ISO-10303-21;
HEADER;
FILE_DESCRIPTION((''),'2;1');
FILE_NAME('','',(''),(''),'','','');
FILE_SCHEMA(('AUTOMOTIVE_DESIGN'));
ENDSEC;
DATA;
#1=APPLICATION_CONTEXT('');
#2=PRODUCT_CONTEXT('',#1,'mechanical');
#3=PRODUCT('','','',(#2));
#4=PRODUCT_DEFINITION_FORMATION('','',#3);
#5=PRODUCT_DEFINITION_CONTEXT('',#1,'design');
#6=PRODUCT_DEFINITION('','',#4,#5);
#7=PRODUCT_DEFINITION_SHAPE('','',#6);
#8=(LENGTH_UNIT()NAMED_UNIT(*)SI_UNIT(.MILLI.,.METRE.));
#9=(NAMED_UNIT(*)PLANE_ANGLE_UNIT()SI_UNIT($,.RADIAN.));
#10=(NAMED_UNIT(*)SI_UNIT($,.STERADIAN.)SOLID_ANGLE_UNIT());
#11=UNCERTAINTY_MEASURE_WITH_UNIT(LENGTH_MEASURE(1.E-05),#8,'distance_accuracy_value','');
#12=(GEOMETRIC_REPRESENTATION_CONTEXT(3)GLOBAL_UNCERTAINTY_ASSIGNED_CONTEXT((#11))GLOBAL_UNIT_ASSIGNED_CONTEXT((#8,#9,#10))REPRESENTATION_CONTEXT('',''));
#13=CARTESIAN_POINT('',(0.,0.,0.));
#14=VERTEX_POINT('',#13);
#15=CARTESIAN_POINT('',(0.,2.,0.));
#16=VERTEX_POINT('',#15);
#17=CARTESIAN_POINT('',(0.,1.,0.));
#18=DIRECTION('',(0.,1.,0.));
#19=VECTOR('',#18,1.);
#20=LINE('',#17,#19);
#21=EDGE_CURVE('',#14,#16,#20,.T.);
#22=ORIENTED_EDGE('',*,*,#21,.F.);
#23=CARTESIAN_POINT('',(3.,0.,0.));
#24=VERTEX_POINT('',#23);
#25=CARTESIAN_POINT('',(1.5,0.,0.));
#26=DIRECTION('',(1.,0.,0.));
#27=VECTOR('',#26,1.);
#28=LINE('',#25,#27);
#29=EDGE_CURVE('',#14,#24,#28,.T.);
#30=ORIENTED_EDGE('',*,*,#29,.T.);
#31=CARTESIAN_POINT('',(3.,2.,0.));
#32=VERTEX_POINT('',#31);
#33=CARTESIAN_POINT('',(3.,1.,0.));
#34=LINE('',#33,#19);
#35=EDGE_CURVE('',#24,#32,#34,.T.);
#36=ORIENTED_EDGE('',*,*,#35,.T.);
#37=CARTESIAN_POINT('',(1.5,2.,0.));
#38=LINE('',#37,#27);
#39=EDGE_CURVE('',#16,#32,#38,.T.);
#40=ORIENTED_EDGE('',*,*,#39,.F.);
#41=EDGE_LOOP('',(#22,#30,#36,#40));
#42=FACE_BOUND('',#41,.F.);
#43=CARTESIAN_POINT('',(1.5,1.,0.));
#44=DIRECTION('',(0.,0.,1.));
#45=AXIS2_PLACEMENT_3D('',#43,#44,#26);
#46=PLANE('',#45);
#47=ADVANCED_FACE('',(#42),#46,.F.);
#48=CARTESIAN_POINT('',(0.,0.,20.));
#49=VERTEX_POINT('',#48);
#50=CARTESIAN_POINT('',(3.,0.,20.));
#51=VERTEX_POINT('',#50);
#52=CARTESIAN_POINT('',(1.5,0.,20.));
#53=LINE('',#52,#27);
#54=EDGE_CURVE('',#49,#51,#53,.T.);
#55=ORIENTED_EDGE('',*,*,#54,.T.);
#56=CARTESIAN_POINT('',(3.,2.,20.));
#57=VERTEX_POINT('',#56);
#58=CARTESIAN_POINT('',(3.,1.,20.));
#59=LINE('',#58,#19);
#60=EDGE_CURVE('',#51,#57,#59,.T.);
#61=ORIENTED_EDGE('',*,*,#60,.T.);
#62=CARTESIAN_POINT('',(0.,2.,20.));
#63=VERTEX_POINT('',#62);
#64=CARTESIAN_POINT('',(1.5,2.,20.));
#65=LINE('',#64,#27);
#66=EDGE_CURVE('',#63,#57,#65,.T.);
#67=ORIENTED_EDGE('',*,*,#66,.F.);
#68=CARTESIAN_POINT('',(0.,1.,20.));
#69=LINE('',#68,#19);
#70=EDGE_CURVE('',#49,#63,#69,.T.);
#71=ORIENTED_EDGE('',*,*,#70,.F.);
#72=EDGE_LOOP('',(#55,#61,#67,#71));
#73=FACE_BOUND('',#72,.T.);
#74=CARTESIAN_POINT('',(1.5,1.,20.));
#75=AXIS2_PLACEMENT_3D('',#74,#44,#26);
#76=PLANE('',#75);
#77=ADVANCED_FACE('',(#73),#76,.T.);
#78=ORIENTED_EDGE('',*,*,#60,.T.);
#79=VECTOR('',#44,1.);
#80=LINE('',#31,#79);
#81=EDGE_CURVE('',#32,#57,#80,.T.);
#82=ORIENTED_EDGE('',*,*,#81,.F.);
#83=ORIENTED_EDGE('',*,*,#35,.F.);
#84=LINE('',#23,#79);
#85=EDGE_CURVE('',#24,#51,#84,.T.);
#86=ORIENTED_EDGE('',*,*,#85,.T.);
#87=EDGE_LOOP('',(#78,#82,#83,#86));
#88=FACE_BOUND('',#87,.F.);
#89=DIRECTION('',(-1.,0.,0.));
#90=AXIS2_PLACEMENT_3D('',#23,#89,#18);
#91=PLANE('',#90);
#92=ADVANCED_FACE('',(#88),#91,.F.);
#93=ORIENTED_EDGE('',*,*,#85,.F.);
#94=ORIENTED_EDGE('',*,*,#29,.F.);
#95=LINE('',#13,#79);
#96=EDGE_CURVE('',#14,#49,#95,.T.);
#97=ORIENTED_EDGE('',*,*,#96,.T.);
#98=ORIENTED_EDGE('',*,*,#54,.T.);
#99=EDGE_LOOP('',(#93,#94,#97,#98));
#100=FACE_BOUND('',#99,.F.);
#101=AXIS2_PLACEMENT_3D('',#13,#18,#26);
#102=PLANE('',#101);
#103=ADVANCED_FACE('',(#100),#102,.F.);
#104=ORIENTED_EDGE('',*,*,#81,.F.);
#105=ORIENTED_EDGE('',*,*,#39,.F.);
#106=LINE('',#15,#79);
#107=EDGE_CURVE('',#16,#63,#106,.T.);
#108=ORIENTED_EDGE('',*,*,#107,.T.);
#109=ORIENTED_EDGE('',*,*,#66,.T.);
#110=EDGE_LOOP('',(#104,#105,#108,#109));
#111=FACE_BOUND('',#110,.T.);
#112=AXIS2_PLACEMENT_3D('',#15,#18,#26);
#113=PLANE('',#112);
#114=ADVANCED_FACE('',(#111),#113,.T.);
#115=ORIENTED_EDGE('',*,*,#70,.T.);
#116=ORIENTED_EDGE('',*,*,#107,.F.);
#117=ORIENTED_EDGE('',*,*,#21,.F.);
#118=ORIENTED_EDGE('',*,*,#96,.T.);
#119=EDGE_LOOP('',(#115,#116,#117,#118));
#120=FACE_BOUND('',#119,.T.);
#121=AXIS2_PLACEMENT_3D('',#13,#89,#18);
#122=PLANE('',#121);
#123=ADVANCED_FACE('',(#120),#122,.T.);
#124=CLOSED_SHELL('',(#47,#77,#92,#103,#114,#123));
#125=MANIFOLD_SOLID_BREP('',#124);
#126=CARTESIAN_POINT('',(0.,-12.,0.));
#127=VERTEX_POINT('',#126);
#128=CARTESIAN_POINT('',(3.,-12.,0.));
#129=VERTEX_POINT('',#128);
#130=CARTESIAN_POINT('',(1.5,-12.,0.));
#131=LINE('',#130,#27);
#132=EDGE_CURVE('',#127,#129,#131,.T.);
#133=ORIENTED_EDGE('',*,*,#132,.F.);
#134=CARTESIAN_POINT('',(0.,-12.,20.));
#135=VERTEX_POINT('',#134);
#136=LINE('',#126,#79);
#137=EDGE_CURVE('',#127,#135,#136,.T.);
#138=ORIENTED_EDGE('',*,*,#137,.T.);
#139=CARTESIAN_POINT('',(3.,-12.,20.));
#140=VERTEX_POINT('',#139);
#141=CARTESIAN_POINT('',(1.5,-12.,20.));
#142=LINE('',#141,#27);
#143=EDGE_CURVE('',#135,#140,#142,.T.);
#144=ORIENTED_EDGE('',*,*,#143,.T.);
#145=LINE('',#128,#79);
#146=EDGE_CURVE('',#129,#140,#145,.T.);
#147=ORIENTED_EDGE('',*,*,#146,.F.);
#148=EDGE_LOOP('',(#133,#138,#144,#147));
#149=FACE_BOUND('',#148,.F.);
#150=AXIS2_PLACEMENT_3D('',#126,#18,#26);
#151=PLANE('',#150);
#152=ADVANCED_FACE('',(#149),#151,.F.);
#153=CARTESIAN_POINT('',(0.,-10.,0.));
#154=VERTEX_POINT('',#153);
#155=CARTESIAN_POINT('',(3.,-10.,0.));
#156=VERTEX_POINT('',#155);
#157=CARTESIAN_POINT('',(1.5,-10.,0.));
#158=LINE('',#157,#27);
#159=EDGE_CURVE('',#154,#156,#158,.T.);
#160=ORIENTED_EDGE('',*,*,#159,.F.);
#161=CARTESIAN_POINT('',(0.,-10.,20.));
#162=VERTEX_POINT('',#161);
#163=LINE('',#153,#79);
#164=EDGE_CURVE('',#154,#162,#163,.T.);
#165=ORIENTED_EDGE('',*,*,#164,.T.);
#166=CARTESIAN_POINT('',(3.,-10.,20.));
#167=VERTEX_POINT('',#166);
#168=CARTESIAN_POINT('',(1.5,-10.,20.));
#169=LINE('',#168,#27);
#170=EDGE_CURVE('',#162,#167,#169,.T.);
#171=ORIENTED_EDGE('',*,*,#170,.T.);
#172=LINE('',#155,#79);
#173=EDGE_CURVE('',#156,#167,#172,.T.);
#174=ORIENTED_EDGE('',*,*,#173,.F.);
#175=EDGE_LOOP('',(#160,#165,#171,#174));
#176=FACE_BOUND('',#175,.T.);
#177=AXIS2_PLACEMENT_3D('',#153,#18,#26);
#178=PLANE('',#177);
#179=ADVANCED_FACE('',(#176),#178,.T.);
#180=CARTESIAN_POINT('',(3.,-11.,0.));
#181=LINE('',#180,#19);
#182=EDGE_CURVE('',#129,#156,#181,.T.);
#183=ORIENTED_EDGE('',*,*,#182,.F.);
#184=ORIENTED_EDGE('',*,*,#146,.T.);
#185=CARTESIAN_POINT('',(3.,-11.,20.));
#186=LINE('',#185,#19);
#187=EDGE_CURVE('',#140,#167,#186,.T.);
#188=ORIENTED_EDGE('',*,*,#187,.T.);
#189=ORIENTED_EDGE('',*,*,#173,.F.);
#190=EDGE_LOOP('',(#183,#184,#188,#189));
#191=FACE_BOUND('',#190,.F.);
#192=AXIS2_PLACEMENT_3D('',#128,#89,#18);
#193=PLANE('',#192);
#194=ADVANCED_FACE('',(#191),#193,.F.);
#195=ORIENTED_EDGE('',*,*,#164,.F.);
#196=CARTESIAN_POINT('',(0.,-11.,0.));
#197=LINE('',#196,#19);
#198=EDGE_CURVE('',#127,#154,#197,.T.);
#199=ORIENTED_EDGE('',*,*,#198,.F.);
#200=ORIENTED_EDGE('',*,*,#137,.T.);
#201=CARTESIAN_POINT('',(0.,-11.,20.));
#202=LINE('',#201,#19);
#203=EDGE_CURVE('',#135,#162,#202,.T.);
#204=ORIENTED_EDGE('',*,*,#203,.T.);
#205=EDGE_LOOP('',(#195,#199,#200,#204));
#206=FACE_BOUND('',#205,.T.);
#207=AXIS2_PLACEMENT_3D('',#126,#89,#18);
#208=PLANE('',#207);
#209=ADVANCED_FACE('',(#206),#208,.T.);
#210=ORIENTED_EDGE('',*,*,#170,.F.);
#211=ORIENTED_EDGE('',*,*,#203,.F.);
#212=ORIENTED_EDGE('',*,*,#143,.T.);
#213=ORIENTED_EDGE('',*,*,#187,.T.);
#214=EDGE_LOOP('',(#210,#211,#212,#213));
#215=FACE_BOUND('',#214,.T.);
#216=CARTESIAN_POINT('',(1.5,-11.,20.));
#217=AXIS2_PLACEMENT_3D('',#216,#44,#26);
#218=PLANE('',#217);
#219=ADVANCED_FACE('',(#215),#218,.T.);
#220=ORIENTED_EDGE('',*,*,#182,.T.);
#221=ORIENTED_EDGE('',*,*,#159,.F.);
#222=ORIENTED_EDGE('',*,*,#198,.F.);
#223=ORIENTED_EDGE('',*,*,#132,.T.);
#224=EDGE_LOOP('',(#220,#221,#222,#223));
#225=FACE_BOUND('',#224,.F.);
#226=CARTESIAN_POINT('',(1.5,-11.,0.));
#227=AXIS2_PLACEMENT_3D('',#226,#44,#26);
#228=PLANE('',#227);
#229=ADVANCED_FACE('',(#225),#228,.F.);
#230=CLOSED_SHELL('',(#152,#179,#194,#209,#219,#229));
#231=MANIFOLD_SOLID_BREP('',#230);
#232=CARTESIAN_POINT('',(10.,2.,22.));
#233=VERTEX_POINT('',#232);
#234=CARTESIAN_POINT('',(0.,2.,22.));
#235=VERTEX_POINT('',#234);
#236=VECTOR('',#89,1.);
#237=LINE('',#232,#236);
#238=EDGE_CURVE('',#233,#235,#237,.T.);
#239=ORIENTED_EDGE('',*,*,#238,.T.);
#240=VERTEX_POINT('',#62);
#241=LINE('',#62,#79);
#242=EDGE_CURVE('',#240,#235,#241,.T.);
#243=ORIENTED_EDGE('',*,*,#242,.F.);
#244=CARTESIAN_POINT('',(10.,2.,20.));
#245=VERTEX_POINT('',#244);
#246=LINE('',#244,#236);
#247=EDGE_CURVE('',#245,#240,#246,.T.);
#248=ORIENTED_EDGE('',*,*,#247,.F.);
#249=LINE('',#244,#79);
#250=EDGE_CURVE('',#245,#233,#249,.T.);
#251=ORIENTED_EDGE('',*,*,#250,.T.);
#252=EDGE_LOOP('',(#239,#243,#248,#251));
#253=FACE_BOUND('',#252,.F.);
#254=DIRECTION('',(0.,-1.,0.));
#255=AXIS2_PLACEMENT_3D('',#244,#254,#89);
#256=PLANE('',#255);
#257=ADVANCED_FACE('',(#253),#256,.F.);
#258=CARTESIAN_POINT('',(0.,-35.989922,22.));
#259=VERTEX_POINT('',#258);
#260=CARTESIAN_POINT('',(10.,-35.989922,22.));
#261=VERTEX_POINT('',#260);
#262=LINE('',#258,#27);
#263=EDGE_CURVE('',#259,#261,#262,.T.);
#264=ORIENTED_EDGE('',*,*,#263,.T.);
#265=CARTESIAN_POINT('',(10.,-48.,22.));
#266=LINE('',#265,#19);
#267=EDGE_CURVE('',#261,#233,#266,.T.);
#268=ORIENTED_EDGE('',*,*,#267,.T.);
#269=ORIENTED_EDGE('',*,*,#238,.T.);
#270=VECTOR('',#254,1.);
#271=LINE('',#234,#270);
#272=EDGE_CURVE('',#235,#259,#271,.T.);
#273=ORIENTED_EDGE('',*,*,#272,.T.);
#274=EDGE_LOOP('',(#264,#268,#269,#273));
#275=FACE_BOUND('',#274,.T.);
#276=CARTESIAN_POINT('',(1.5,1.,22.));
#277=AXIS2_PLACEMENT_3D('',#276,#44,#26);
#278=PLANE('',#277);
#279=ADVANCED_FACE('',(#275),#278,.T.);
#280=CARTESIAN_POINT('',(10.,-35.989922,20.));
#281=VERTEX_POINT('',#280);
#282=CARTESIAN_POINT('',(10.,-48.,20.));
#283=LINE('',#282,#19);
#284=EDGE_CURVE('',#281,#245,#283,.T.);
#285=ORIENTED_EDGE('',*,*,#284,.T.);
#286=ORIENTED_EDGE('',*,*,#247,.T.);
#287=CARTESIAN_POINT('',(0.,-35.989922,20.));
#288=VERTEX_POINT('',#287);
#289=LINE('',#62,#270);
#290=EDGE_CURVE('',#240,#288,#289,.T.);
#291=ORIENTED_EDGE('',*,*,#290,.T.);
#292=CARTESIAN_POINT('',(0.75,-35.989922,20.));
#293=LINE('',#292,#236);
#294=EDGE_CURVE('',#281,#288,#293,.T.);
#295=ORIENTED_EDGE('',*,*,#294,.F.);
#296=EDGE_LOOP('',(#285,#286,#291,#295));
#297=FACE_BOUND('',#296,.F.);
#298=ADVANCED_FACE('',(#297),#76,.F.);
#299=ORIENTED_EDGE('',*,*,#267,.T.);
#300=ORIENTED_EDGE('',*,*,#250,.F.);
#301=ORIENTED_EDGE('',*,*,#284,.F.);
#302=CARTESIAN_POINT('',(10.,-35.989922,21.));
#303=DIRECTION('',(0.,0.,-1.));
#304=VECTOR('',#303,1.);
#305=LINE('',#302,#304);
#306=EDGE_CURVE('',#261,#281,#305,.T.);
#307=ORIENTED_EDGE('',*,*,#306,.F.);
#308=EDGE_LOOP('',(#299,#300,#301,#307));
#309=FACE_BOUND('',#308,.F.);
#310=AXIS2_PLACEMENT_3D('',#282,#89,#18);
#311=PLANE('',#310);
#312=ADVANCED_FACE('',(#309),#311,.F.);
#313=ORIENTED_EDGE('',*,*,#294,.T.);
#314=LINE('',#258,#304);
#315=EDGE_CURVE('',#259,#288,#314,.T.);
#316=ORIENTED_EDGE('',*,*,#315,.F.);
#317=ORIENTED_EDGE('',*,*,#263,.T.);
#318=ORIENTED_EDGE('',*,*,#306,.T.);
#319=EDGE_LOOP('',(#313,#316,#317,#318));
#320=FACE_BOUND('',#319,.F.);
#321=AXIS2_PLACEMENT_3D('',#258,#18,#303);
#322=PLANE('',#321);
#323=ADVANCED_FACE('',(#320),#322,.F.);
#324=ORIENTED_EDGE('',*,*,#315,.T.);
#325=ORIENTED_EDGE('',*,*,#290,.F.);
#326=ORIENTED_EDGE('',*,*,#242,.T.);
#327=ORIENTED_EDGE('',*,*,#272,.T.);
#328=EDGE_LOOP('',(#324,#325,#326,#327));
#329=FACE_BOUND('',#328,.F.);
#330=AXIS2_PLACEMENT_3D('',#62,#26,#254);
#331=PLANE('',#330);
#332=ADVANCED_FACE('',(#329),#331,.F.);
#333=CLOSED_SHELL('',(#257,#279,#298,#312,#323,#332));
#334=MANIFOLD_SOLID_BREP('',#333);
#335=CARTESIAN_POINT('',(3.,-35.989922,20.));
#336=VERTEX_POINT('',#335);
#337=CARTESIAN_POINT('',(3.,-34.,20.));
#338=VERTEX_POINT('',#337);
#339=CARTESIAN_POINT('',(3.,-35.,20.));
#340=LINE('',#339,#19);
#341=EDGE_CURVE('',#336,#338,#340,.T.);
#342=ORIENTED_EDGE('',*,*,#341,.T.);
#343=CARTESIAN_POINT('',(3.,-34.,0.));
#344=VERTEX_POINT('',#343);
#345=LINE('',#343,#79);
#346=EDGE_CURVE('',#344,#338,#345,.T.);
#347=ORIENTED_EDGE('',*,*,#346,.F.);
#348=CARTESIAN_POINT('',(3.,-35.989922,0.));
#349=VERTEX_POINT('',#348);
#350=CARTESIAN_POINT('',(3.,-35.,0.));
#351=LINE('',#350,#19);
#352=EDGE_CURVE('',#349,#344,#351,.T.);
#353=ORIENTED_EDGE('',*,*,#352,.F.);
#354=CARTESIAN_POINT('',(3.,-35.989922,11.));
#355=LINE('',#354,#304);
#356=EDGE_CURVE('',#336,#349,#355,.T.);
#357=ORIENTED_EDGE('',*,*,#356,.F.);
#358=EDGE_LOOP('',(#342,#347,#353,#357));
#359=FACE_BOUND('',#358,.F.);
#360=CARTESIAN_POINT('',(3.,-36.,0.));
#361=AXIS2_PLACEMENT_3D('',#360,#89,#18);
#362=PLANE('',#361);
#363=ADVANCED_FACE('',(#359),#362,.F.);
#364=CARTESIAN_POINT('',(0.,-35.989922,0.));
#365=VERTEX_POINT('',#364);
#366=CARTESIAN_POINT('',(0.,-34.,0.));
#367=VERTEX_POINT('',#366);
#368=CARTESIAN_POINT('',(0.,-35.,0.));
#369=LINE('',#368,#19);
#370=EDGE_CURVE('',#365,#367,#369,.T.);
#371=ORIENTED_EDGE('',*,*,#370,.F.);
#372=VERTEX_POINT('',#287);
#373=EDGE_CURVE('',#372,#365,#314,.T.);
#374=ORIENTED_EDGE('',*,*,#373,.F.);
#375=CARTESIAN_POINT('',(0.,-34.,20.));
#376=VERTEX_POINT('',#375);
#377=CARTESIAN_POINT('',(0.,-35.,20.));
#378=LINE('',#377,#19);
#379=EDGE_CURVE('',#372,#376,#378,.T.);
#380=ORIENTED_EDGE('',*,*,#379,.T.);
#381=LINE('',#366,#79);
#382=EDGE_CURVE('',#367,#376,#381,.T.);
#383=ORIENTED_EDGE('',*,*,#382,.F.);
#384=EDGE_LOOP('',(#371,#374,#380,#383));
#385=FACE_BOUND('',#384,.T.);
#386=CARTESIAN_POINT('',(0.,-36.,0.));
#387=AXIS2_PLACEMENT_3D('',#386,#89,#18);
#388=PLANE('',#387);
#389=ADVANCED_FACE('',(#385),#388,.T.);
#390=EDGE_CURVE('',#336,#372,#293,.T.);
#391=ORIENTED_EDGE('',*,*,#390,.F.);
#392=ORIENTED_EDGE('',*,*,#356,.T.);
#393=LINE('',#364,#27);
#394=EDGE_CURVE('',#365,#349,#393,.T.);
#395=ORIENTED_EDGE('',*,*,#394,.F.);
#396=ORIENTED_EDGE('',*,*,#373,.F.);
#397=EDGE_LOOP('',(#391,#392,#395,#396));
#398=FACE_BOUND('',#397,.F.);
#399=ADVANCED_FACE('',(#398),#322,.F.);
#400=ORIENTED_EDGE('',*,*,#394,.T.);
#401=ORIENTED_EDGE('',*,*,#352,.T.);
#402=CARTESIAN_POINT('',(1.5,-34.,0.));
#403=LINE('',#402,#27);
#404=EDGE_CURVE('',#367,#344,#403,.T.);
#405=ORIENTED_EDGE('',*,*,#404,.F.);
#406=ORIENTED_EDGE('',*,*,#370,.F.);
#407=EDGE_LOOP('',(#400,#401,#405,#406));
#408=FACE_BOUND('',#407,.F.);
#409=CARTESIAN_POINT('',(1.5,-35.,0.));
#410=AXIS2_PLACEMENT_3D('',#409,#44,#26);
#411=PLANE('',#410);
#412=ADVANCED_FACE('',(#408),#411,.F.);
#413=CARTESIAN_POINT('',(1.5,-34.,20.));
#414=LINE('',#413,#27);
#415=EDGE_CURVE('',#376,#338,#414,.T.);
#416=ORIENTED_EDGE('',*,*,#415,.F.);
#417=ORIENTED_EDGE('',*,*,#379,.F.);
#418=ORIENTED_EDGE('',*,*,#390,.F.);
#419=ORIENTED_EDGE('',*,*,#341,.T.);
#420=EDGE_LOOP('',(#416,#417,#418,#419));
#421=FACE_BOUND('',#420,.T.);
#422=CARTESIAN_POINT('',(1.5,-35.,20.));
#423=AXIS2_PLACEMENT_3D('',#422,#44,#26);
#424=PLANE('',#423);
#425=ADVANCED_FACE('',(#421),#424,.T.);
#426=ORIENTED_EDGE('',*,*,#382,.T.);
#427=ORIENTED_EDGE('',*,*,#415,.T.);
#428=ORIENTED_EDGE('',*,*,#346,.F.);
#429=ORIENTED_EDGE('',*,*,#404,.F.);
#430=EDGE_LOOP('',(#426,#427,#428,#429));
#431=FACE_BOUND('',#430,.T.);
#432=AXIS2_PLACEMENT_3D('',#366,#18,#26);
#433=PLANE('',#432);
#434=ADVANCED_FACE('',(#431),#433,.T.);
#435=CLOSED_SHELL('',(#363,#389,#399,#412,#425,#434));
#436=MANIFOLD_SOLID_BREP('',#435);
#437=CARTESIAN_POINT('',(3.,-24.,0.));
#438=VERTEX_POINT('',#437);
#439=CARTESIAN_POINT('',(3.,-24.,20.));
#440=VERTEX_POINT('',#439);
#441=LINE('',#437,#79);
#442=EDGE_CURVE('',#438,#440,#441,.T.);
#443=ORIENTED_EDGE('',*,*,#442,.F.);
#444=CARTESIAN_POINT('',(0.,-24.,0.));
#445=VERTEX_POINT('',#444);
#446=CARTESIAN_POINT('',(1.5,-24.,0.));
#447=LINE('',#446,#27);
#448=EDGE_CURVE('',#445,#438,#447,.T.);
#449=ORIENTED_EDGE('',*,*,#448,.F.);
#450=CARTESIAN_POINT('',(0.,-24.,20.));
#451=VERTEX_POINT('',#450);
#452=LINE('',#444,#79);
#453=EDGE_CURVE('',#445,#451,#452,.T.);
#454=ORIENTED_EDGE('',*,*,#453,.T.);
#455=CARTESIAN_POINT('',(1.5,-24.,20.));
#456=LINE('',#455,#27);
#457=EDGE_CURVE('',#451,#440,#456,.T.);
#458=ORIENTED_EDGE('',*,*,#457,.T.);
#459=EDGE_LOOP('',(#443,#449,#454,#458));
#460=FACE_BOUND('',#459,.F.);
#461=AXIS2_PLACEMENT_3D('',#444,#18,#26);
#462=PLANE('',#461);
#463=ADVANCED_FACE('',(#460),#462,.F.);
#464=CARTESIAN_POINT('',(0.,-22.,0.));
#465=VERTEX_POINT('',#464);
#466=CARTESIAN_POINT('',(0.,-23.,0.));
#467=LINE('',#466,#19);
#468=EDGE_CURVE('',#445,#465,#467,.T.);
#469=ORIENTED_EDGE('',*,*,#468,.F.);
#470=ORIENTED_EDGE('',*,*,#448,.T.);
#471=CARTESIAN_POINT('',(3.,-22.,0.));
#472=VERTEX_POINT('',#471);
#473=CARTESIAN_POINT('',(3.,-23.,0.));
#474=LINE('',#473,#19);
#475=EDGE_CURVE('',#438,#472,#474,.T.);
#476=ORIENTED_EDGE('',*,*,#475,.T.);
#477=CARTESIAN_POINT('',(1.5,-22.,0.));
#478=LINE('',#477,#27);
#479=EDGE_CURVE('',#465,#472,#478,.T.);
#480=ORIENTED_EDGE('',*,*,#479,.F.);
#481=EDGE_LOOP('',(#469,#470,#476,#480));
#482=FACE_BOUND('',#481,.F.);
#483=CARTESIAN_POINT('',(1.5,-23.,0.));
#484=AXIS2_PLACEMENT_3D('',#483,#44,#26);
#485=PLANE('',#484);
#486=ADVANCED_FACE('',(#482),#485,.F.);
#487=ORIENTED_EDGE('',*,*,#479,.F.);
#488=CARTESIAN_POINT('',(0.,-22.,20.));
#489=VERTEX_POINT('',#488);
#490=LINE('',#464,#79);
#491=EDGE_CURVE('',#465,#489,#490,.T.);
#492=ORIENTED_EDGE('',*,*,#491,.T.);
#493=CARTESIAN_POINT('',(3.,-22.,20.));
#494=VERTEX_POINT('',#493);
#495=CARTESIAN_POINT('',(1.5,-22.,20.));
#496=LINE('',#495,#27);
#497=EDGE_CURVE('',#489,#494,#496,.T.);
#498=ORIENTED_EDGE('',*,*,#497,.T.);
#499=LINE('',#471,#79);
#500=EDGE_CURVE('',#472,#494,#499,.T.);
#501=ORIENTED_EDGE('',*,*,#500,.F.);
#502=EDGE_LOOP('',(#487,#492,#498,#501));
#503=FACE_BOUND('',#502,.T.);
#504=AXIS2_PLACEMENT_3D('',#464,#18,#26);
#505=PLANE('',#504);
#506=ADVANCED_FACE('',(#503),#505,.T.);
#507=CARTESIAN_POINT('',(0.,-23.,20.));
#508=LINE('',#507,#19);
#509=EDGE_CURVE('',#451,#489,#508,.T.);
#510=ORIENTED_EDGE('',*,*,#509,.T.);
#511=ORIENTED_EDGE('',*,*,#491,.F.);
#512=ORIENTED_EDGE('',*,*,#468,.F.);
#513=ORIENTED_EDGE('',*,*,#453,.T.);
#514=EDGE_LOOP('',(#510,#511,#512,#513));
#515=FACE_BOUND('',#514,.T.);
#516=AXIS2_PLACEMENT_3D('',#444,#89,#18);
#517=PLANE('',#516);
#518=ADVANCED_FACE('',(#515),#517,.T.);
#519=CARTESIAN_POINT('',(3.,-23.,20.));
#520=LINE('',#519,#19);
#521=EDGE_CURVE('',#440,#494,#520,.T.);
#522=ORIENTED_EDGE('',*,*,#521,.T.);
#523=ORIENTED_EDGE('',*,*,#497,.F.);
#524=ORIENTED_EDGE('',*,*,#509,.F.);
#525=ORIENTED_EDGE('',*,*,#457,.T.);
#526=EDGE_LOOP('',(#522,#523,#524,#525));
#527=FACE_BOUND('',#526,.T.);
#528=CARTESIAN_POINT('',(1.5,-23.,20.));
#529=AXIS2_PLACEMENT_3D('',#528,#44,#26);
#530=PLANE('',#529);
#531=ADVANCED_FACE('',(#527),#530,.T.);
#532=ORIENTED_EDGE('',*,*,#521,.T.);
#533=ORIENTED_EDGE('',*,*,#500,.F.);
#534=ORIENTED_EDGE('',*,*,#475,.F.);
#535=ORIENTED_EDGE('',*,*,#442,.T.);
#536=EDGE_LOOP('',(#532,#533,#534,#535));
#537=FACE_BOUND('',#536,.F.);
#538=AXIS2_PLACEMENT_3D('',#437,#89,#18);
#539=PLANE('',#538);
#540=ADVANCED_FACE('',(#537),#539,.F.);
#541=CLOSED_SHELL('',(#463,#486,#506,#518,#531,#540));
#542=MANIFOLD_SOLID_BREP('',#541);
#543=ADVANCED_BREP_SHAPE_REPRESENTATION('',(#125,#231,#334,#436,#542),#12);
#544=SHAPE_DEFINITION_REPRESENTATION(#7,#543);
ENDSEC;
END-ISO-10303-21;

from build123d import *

# Parameters (mm, degrees)
F0_W     = 3
F0_H     = 2
F1_DEPTH = 20
F2_W     = 3
F2_H     = 2
F3_DEPTH = 2
F4_W     = 7.0251794532
F4_H     = 3.7774270773
F5_DEPTH = 25
F6_W     = 12.01007846
F6_H     = 2
F7_DEPTH = 25


with BuildPart() as f1:
    # F0 (on Top) → F1 (new body)
    with BuildSketch(Plane.XY):
        with Locations((1.5, 1)):
            Rectangle(F0_W, F0_H)
    extrude(amount=F1_DEPTH)


with BuildPart() as f1b:
    # F0 (on Top) → F1, piece 2 (new body)
    with BuildSketch(Plane.XY):
        with Locations((1.5, -11)):
            Rectangle(F0_W, F0_H)
    extrude(amount=F1_DEPTH)


with BuildPart() as f1c:
    # F0 (on Top) → F1, piece 3 (new body)
    with BuildSketch(Plane.XY):
        with Locations((1.5, -23)):
            Rectangle(F0_W, F0_H)
    extrude(amount=F1_DEPTH)


with BuildPart() as f1d:
    # F0 (on Top) → F1, piece 4 (new body)
    with BuildSketch(Plane.XY):
        with Locations((1.5, -35)):
            Rectangle(F0_W, F0_H)
    extrude(amount=F1_DEPTH)


with BuildPart() as f1e:
    # F0 (on Top) → F1, piece 5 (new body)
    with BuildSketch(Plane.XY):
        with Locations((1.5, -47)):
            Rectangle(F0_W, F0_H)
    extrude(amount=F1_DEPTH)


with BuildPart() as f1f:
    # F0 (on Top) → F1, piece 6 (new body)
    with BuildSketch(Plane.XY):
        with Locations((1.5, -59)):
            Rectangle(F0_W, F0_H)
    extrude(amount=F1_DEPTH)

    # F4 (on face) → F5 (cut)
    with BuildSketch(Plane.XY.offset(20)):
        with Locations((1.5459530987, -58.1112864614)):
            Rectangle(F4_W, F4_H)
    extrude(amount=-F5_DEPTH, mode=Mode.SUBTRACT)


with BuildPart() as f3:
    # F2 (on face) → F3 (new body)
    with BuildSketch(Plane.XY.offset(20)):
        with Locations((1.5, 1)):
            Rectangle(F2_W, F2_H)
        Polygon((10, 2), (3, 2), (3, 0), (0, 0), (0, -48), (10, -48), align=None)
    extrude(amount=F3_DEPTH)


with BuildPart() as f7_tool:
    # F6 (on face) → F7 (new body)
    with BuildSketch(Plane(origin=(0, 0, 0), x_dir=(0, -1, 0), z_dir=(-1, 0, 0))):
        with Locations((41.99496077, 21)):
            Rectangle(F6_W, F6_H)
        Polygon((48.0117946863, 22), (48, 22), (48, 20), (35.98992154, 20), (35.98992154, 0), (48.0117946863, 0), align=None)
    extrude(amount=-F7_DEPTH)


with BuildPart() as f1d_1:
    add(f1d.part)

    # F7: cut by f7_tool
    add(f7_tool.part, mode=Mode.SUBTRACT)


with BuildPart() as f1e_1:
    add(f1e.part)

    # F7: cut by f7_tool
    add(f7_tool.part, mode=Mode.SUBTRACT)


with BuildPart() as f3_1:
    add(f3.part)

    # F7: cut by f7_tool
    add(f7_tool.part, mode=Mode.SUBTRACT)


solid = Compound([f1.part, f1b.part, f1c.part, f1d_1.part, f3_1.part])
